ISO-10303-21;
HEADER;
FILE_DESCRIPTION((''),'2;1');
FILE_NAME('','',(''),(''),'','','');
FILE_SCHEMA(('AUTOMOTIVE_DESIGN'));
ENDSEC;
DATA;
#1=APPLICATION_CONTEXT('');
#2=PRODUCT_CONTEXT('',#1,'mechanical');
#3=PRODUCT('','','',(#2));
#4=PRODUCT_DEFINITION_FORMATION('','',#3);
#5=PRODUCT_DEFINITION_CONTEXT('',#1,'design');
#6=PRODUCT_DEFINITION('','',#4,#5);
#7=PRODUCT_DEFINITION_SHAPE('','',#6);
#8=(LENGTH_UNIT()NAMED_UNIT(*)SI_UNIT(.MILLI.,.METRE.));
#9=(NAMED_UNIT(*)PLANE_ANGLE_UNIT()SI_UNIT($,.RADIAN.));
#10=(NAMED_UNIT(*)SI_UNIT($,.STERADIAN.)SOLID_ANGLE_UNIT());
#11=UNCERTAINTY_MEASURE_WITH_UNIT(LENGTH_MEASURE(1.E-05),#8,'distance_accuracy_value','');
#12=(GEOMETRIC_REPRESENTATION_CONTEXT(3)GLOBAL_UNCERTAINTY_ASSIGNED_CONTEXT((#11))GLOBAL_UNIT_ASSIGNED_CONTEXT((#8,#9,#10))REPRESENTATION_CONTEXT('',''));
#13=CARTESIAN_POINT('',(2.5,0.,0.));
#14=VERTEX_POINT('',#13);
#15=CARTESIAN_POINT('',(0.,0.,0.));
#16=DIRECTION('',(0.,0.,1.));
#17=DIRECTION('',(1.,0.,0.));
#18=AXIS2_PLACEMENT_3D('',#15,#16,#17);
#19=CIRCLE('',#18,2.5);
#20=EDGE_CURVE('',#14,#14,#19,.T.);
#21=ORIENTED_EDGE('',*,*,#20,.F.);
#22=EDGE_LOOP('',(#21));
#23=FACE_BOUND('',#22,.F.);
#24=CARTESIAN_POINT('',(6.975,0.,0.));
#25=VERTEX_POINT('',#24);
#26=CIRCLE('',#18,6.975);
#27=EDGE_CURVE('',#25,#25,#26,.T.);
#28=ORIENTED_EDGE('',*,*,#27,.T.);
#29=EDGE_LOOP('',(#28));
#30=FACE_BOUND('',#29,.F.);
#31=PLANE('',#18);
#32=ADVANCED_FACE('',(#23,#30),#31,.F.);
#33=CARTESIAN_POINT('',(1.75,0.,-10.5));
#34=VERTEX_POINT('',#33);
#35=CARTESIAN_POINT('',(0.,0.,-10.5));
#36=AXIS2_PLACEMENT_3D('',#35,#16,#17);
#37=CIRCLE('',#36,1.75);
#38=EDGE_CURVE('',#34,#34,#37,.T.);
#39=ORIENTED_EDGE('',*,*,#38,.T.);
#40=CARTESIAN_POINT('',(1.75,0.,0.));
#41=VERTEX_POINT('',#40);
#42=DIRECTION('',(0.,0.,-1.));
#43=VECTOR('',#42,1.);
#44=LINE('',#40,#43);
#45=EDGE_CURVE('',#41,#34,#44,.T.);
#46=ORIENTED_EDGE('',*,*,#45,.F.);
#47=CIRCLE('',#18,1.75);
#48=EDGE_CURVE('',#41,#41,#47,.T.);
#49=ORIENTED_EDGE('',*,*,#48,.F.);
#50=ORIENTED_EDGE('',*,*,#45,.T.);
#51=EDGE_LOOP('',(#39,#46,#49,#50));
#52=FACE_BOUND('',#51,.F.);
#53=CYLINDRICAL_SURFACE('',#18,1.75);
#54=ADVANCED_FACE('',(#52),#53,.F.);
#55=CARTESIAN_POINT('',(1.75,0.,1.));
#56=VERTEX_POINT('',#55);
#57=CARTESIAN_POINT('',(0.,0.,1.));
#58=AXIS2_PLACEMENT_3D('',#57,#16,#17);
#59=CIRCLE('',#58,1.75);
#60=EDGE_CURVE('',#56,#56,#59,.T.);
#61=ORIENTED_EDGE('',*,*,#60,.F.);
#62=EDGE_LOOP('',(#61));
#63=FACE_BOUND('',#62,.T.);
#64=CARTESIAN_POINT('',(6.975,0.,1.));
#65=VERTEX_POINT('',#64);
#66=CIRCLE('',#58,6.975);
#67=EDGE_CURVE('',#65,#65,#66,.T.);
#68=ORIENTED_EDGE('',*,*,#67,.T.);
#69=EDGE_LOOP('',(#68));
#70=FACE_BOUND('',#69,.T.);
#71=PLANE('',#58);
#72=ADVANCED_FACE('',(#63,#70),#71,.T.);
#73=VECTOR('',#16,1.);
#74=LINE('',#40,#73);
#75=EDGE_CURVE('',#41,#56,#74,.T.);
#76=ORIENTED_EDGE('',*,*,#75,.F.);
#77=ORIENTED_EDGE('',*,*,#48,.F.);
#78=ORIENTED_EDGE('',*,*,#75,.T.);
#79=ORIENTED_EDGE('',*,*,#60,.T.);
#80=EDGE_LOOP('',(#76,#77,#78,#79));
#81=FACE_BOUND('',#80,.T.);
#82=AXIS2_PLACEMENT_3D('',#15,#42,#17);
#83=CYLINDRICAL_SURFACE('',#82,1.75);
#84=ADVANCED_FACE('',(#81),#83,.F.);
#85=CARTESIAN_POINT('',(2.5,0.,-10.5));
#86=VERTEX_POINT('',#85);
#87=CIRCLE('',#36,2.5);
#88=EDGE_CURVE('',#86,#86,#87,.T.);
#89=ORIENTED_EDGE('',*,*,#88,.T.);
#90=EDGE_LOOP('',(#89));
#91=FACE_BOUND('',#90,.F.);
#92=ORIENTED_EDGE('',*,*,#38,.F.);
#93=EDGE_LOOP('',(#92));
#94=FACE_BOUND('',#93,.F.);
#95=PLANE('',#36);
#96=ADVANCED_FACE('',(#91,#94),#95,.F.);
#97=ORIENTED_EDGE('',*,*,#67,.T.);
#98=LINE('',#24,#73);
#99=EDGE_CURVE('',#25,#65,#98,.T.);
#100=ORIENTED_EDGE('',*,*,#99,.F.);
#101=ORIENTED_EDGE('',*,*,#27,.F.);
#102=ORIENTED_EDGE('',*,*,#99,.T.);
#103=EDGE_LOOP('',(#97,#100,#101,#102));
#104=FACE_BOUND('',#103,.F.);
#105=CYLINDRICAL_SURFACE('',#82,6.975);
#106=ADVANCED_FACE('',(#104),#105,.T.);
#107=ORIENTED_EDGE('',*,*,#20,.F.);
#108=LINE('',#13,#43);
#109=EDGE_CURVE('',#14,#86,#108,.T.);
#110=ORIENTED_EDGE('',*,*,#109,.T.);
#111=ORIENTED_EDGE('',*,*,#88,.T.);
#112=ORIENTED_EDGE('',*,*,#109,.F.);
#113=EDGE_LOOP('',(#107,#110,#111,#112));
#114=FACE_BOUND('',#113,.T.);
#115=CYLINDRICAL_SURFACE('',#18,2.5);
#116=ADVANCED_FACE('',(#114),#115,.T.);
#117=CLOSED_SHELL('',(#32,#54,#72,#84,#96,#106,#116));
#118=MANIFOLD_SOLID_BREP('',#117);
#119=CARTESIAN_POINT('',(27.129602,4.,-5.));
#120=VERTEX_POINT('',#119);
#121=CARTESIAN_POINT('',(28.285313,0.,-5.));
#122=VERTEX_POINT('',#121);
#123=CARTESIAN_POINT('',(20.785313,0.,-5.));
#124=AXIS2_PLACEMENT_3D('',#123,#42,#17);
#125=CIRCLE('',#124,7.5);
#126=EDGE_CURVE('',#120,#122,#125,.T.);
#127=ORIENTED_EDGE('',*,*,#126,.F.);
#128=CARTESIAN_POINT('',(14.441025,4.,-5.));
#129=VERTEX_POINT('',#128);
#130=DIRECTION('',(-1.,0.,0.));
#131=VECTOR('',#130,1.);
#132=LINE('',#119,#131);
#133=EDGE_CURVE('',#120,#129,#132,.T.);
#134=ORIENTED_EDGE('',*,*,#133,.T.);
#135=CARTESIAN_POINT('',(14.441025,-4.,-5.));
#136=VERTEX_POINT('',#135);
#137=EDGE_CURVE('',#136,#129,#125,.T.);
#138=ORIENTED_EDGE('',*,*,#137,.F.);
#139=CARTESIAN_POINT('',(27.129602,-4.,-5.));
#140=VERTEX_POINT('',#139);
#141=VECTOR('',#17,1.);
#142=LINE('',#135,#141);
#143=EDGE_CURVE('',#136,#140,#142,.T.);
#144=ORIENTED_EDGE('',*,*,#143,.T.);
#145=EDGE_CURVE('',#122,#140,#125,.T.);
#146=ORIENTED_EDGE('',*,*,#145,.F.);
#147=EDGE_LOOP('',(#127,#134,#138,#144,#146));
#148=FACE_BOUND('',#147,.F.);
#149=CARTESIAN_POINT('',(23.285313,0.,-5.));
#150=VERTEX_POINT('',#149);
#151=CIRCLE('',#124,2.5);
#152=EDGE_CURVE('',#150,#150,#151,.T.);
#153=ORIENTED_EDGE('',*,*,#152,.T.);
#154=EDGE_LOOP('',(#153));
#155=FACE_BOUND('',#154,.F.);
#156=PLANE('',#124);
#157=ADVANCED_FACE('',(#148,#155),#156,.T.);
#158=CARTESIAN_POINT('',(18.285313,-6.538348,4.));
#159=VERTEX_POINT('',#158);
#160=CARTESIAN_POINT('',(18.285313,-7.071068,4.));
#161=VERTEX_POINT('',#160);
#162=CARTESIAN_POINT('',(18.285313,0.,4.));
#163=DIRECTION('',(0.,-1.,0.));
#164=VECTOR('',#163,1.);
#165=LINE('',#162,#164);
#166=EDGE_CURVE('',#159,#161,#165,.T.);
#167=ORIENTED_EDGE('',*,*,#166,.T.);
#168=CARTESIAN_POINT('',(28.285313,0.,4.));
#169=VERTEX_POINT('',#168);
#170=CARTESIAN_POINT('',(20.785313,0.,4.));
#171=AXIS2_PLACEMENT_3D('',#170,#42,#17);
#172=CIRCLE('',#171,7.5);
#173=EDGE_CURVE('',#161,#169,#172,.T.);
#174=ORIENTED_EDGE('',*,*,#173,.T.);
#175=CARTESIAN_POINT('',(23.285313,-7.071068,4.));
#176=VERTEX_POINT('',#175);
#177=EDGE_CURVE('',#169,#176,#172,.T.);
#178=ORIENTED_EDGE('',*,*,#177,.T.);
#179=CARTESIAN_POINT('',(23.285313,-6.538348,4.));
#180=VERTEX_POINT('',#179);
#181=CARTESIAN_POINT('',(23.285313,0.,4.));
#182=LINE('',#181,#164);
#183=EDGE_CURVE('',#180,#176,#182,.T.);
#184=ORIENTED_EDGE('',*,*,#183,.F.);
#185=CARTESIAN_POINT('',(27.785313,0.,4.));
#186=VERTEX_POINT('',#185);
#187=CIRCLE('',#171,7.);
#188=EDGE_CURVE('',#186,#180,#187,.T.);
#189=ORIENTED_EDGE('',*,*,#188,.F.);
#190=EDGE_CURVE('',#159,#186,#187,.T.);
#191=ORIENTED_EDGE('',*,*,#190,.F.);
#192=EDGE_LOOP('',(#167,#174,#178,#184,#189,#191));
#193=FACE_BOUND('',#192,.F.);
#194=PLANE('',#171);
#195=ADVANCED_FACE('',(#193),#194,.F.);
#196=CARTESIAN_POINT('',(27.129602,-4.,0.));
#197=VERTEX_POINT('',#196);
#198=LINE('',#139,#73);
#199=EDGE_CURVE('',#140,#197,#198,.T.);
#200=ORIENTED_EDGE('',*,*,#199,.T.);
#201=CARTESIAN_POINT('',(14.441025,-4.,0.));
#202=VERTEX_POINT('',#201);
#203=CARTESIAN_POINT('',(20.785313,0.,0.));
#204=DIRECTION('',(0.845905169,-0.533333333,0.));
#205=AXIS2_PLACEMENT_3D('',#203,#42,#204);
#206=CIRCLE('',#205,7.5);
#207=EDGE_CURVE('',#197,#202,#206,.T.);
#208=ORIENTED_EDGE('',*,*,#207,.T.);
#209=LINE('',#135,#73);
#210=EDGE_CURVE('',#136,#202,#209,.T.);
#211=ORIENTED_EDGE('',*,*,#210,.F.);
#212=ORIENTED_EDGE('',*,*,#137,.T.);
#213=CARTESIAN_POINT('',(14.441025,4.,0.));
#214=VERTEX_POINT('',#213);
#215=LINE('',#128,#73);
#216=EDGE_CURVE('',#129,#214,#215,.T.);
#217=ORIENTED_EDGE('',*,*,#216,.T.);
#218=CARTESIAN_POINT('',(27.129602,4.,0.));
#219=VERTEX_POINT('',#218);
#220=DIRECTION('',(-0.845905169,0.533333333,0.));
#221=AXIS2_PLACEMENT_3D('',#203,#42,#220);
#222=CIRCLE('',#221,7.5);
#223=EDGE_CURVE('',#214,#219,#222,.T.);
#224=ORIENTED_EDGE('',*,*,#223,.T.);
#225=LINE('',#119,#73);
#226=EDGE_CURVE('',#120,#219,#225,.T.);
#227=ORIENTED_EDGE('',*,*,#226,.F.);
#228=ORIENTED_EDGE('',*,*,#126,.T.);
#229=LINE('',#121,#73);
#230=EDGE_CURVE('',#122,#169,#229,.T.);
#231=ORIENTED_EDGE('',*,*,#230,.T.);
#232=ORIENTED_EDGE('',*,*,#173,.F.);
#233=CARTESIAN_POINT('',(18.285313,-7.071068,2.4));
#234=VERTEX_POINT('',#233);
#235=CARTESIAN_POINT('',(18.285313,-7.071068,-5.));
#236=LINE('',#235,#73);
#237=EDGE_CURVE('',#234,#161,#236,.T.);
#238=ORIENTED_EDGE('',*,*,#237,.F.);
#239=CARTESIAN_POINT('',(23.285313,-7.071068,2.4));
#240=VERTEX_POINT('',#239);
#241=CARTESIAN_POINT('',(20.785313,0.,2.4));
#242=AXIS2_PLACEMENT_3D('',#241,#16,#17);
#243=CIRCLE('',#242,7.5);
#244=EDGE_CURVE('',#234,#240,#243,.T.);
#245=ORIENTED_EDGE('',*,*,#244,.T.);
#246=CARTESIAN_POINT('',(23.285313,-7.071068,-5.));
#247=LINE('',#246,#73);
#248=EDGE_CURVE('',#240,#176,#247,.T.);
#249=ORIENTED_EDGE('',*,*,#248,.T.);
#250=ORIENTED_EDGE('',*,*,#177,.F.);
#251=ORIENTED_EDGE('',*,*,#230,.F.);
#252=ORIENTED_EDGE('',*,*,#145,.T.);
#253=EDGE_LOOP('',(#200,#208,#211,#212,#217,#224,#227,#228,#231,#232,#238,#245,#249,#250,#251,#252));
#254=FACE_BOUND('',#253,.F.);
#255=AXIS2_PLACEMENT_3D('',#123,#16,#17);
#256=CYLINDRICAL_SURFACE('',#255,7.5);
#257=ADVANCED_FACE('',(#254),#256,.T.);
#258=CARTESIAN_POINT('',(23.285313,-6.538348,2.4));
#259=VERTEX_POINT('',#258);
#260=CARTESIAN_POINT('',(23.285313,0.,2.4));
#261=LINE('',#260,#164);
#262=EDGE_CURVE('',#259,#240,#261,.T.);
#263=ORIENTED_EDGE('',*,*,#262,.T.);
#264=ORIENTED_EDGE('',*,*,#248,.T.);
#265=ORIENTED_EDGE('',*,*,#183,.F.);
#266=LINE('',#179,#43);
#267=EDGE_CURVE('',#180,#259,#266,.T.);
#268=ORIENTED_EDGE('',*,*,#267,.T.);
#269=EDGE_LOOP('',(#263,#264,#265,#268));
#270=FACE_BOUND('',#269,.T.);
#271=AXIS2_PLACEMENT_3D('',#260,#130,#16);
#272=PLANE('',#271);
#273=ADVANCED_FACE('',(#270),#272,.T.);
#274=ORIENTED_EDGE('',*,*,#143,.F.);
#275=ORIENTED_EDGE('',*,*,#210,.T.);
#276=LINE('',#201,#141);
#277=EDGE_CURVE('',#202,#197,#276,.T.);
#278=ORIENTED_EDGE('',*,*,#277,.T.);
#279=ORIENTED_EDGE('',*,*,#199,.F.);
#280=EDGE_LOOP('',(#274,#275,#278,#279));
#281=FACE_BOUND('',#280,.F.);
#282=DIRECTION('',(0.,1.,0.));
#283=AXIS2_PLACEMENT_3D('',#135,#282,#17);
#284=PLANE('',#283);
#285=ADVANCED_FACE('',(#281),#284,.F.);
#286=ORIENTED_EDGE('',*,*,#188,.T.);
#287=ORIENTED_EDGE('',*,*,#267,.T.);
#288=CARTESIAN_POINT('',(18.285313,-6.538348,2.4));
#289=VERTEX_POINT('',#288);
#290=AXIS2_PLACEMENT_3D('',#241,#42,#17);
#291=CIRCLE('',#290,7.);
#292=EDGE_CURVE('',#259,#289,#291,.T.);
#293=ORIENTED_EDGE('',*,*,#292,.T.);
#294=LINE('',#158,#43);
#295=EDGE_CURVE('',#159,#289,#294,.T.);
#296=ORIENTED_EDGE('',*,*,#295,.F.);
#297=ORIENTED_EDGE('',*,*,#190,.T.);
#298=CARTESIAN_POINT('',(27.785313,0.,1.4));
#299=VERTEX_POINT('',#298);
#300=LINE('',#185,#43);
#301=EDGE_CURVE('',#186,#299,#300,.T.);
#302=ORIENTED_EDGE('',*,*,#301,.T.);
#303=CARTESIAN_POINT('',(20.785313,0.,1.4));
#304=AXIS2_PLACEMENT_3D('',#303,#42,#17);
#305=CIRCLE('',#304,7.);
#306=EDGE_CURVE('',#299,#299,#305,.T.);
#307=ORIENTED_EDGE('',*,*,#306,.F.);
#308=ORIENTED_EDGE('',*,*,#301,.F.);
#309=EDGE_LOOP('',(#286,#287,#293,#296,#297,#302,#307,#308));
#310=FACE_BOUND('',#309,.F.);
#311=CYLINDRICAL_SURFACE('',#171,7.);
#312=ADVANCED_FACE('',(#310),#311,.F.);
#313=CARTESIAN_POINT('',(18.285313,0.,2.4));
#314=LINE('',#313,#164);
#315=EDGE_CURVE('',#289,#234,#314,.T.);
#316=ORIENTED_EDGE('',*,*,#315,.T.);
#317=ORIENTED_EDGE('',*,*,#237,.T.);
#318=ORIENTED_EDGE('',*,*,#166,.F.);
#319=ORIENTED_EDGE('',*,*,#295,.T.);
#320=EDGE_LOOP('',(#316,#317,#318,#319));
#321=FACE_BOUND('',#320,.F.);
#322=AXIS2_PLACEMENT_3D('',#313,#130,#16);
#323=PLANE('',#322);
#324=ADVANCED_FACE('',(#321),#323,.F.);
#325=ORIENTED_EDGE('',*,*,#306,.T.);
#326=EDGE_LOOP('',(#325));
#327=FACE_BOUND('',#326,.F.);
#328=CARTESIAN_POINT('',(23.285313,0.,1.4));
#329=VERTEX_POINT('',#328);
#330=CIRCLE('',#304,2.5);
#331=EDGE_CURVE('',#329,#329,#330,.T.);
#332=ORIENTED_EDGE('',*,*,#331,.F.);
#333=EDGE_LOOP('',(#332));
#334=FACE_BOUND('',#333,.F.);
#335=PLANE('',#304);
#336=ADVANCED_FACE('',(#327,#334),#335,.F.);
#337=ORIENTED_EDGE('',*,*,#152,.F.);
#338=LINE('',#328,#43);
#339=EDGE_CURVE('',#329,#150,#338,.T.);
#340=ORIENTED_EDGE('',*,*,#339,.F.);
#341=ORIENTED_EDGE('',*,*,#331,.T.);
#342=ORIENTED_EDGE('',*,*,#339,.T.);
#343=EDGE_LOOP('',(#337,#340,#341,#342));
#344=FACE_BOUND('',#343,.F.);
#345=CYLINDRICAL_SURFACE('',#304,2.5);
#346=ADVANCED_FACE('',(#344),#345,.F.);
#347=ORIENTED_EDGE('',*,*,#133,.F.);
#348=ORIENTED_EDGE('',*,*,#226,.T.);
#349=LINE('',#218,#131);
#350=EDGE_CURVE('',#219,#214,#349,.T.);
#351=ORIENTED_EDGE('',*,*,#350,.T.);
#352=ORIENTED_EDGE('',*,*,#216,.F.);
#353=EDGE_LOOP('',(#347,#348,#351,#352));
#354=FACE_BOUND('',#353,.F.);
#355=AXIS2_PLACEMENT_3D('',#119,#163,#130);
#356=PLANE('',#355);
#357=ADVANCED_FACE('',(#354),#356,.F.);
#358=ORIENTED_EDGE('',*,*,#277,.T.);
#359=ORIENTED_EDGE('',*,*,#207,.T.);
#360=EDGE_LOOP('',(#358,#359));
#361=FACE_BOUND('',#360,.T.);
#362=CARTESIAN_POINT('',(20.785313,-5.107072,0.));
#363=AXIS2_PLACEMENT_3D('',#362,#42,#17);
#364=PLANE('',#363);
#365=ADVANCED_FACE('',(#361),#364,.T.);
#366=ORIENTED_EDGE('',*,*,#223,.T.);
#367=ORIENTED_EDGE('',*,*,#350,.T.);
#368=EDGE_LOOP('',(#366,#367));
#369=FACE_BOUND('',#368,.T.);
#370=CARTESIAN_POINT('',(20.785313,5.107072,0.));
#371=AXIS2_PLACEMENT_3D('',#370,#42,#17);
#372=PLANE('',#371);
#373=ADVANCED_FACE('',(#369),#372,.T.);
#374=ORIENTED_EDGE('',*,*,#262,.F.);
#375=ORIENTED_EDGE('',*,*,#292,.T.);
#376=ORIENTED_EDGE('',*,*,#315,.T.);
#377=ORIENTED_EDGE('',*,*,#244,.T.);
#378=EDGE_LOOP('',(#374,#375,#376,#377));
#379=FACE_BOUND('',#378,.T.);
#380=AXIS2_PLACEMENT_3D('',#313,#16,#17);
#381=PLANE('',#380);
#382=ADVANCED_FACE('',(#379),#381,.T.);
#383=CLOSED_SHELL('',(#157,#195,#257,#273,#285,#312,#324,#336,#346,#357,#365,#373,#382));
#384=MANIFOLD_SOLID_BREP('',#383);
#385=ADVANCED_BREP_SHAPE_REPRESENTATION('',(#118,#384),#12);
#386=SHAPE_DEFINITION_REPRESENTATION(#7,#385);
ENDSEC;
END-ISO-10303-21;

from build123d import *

# Parameters (mm, degrees)
F0_R     = 6.975
F0_R_2   = 2.5
F0_R_3   = 1.75
F1_DEPTH = 1
F2_DEPTH = 10.5
F5_W     = 5
F5_H     = 1.6
F6_DEPTH = 7.501
F8_DEPTH = 5


# Not quite as in the source:
# - a feature names something its author has since deleted; it is built from what else it names


with BuildPart() as f1:
    # F0 (on Top) → F1 (new body)
    with BuildSketch(Plane.XY):
        Circle(F0_R)
        Circle(F0_R_2, mode=Mode.SUBTRACT)
        Circle(F0_R_2)
        Circle(F0_R_3, mode=Mode.SUBTRACT)
    extrude(amount=F1_DEPTH)

    # F0 (on Top) → F2 (join)
    with BuildSketch(Plane.XY):
        Circle(F0_R_2)
        Circle(F0_R_3, mode=Mode.SUBTRACT)
    extrude(amount=-F2_DEPTH)


with BuildPart() as f4:
    # F3 (on Front) → F4 (revolve)
    with BuildSketch(Plane.XZ):
        Polygon((28.2853133976, -5), (28.2853133976, 4), (27.7853133976, 4), (27.7853133976, 1.4), (23.2853133976, 1.4), (23.2853133976, -5), align=None)
    revolve(axis=Axis((20.7853133976, 0, -0.6741590851), (0, 0, -1)))

    # F5 (on Front) → F6 (cut, through all)
    with BuildSketch(Plane.XZ):
        with Locations((20.7853133976, 3.2)):
            Rectangle(F5_W, F5_H)
    extrude(amount=F6_DEPTH, mode=Mode.SUBTRACT)

    # F7 (on face) → F8 (cut)
    with BuildSketch(Plane(origin=(0, 0, -5), x_dir=(1, 0, 0), z_dir=(0, 0, -1))):
        with BuildLine():
            ThreePointArc((27.1296021679, 4), (20.7853133976, 7.5), (14.4410246274, 4))
            Line((14.4410246274, 4), (27.1296021679, 4))
        make_face()
        with BuildLine():
            Line((27.1296021679, -4), (14.4410246274, -4))
            ThreePointArc((14.4410246274, -4), (20.7853133976, -7.5), (27.1296021679, -4))
        make_face()
    extrude(amount=-F8_DEPTH, mode=Mode.SUBTRACT)


solid = Compound([f1.part, f4.part])
